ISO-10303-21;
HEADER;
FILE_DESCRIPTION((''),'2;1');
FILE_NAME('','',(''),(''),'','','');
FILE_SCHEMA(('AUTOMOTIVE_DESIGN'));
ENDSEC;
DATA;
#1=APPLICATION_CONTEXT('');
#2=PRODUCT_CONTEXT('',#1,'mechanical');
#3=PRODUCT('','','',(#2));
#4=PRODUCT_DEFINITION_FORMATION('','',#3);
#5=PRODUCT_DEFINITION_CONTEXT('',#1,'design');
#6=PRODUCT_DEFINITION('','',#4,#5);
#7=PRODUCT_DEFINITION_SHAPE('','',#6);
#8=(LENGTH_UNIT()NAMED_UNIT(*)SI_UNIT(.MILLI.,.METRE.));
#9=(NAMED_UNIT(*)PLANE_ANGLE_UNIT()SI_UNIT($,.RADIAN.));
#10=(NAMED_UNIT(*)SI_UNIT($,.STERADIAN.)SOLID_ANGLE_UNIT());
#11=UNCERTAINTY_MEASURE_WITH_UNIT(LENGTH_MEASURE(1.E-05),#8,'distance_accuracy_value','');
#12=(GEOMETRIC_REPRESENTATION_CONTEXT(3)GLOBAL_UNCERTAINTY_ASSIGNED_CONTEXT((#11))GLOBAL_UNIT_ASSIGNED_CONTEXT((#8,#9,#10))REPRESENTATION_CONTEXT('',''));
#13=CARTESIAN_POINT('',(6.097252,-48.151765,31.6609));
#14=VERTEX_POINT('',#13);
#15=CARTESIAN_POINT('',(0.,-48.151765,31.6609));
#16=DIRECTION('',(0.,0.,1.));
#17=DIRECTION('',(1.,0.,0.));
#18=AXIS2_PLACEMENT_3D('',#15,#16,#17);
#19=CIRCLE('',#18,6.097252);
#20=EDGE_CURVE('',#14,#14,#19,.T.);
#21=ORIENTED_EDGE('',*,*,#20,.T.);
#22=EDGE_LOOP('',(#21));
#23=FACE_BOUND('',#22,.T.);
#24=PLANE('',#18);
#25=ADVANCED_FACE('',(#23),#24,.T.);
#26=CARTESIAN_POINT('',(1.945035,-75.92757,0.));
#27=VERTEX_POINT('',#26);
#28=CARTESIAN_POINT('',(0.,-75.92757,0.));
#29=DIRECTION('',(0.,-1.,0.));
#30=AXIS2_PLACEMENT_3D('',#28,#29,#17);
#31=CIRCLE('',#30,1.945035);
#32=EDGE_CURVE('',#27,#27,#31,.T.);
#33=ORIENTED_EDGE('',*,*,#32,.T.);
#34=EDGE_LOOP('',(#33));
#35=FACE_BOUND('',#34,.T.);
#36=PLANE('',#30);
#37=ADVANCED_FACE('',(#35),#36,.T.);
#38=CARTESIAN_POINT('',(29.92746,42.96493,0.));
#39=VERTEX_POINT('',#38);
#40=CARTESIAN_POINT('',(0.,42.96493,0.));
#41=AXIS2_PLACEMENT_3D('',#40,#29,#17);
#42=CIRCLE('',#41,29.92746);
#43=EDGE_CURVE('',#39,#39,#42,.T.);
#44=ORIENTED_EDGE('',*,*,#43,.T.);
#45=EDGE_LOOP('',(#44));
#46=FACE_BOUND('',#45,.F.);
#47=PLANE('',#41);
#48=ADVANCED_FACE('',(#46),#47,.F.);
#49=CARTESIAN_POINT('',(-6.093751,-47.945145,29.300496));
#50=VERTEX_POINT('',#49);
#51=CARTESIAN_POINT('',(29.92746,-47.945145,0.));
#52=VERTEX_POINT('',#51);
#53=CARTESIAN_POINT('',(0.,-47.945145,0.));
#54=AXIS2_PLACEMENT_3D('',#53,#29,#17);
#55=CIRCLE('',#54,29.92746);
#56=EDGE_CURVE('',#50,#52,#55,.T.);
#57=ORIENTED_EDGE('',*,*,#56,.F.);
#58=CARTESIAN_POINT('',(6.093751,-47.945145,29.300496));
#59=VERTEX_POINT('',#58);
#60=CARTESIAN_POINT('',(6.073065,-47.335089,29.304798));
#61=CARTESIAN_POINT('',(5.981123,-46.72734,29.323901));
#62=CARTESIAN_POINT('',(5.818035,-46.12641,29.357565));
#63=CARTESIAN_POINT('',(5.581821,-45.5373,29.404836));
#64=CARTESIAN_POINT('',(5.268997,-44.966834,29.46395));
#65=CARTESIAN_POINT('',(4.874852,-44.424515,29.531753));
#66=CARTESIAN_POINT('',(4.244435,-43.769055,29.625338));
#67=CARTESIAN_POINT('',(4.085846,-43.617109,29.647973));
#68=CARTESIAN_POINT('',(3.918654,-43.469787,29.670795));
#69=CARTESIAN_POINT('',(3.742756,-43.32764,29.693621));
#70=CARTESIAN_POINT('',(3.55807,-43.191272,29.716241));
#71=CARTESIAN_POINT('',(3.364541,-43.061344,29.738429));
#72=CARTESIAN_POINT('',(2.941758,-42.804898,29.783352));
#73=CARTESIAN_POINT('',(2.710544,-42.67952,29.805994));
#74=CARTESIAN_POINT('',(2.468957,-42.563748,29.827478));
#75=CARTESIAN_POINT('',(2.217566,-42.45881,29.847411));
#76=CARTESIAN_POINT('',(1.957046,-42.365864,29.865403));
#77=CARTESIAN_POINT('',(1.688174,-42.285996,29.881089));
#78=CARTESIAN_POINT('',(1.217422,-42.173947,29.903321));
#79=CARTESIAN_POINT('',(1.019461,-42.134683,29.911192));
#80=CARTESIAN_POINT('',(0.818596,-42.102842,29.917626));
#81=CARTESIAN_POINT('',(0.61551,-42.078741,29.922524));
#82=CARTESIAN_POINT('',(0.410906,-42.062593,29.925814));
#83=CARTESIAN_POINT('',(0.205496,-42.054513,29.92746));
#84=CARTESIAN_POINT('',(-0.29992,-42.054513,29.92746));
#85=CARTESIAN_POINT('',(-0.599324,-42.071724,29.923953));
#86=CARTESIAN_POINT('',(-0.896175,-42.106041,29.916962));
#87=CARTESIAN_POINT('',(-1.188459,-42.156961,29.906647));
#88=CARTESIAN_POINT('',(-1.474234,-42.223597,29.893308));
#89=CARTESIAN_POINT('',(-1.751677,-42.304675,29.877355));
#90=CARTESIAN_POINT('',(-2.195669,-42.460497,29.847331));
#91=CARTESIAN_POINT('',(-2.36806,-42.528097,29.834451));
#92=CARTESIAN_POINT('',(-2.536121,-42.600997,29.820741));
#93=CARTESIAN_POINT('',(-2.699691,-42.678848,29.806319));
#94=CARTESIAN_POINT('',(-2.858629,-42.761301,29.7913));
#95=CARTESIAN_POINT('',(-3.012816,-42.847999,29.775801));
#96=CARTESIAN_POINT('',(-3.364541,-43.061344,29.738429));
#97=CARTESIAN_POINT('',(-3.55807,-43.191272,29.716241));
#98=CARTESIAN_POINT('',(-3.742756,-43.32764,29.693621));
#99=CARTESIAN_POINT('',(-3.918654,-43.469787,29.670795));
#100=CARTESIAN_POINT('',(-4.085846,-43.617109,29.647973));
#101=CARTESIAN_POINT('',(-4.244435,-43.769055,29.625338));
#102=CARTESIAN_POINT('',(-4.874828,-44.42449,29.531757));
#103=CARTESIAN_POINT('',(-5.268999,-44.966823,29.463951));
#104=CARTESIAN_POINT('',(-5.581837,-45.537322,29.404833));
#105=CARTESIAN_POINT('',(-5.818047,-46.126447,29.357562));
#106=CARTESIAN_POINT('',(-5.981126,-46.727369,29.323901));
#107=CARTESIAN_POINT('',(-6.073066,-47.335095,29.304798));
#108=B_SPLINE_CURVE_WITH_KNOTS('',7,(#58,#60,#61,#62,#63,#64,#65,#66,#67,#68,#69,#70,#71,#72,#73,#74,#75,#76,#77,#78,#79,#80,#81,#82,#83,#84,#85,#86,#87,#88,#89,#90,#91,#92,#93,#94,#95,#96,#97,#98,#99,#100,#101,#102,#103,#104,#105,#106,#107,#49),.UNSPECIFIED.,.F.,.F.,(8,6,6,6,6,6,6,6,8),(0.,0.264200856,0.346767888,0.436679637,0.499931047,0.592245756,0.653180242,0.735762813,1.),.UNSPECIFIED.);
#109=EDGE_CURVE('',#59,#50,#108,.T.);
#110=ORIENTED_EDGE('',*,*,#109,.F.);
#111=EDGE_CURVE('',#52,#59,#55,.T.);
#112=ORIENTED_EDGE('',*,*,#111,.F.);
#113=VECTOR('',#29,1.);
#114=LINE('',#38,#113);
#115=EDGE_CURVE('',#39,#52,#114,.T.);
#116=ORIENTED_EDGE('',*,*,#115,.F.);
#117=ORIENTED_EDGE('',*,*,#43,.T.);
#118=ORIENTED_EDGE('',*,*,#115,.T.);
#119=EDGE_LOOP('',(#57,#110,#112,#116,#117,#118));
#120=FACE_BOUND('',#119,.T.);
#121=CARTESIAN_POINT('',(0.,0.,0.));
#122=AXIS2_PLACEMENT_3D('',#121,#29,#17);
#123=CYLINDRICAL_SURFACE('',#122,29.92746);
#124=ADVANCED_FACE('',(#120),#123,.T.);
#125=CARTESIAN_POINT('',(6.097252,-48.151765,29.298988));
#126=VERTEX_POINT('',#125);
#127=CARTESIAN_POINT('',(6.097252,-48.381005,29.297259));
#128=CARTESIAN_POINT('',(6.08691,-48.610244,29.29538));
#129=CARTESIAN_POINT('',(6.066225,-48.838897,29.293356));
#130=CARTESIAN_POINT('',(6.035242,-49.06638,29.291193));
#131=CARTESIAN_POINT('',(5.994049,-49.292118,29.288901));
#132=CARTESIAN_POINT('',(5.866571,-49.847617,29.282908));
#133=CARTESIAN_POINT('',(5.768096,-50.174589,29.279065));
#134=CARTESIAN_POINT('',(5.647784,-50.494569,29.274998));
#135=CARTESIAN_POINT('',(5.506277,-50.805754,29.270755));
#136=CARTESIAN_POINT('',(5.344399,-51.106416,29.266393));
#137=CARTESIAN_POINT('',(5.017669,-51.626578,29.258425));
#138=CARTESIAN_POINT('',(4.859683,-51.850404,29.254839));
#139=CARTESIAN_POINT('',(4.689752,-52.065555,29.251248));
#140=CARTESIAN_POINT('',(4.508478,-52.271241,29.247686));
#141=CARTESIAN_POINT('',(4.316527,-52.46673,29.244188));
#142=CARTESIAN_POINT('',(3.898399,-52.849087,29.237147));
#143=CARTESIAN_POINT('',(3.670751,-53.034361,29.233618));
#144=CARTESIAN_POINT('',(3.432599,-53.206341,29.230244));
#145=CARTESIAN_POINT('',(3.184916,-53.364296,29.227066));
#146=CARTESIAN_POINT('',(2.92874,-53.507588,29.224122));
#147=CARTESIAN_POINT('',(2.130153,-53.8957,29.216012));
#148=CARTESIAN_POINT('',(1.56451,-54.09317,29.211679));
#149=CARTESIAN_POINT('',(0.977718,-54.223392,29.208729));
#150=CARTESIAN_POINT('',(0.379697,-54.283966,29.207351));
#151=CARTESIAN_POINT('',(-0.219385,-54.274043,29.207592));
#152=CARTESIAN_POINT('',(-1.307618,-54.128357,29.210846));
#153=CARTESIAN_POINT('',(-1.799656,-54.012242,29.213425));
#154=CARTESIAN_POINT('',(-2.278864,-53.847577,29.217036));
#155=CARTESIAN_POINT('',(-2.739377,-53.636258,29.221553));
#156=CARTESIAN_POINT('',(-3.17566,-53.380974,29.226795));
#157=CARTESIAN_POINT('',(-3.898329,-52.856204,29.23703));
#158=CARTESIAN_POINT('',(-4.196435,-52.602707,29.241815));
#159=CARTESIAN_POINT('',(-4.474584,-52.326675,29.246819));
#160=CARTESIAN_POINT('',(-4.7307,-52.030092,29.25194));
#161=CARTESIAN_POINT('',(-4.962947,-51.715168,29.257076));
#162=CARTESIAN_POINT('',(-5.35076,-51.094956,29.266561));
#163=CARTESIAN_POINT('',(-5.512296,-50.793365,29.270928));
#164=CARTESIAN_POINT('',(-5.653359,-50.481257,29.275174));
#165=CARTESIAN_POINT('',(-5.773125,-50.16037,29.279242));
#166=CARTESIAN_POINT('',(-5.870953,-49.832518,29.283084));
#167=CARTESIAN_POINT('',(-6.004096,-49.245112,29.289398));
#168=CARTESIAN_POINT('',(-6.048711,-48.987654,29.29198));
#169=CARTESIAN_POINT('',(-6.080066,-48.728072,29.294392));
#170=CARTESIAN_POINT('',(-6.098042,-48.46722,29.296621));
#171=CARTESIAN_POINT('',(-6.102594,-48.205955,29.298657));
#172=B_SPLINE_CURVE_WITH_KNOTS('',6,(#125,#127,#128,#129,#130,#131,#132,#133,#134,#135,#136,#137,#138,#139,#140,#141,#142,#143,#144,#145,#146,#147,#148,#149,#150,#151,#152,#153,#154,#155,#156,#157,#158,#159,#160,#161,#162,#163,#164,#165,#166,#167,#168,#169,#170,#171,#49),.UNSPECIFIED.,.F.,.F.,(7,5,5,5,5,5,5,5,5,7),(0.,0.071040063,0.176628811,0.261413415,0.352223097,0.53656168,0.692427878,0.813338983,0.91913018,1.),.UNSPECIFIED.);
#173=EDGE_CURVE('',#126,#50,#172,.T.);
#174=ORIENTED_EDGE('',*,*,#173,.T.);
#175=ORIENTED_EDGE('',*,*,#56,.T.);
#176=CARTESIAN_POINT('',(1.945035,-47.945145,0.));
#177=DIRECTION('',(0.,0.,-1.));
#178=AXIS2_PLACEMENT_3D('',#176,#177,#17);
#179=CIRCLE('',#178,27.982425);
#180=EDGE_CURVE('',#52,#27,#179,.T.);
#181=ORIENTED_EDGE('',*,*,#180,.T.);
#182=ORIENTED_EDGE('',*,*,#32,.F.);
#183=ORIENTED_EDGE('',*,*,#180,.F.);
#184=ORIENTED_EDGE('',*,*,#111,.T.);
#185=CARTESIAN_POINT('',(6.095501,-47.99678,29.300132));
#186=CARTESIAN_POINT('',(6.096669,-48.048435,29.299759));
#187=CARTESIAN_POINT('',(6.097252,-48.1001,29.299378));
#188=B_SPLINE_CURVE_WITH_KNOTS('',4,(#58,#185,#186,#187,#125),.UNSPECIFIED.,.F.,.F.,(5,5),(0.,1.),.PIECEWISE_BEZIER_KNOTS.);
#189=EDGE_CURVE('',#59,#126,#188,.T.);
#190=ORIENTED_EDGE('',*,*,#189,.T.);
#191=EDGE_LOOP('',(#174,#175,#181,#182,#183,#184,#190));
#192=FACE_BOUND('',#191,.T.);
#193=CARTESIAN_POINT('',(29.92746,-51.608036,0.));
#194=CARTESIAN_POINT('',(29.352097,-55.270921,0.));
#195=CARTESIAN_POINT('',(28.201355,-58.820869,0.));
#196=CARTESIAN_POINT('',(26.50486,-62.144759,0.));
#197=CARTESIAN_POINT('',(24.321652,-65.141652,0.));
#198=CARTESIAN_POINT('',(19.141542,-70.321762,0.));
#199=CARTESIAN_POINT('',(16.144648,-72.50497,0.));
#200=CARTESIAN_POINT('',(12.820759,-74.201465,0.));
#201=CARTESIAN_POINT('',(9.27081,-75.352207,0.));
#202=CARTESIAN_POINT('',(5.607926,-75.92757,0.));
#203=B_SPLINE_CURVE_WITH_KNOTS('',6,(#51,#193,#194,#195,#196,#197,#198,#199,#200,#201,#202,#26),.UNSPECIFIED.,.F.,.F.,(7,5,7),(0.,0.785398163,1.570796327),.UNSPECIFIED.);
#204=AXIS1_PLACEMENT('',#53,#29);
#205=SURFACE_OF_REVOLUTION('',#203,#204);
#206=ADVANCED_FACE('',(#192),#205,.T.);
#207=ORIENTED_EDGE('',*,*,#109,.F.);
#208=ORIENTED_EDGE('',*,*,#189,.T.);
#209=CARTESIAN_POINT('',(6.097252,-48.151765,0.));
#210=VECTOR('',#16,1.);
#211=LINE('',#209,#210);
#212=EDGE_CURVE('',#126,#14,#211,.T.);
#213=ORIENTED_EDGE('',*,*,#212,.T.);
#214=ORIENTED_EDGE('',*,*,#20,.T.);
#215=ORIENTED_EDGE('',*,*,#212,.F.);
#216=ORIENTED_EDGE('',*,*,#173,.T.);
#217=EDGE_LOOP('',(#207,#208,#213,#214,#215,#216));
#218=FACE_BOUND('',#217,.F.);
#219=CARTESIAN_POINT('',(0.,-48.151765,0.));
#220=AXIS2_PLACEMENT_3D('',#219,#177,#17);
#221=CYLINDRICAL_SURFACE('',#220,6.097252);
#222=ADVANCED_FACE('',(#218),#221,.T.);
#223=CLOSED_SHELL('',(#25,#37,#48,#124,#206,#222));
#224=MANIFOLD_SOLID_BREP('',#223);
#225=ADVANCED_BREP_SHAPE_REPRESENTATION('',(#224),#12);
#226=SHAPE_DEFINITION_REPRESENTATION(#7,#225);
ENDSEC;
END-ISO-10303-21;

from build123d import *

# Parameters (mm, degrees)
F0_R     = 29.9274598154
F1_DEPTH = 75.92757
F2_R     = 27.9824251374
F3_DEPTH = 42.964930072
F4_R     = 6.0972524399
F5_DEPTH = 31.6609
F6_DEPTH = 6.63492


# Not quite as in the source:
# - a feature names something its author has since deleted; it is built from what else it names


with BuildPart() as f1:
    # F0 (on Front) → F1 (new body)
    with BuildSketch(Plane.XZ):
        Circle(F0_R)
    extrude(amount=F1_DEPTH)

    # F2
    f2_edges = [f1.edges().sort_by_distance(p)[0] for p in [
        (-29.92746, -75.92757, 0),
    ]]
    fillet(f2_edges, radius=F2_R)

    # F3 (add): a face of the model
    f3_faces = [f1.faces().sort_by_distance(p)[0] for p in [
        (0, 0, 0),
    ]]
    extrude(f3_faces, amount=F3_DEPTH)

    # F4 (on Top) → F5 (join)
    with BuildSketch(Plane.XY):
        with Locations((0, -48.1517650187)):
            Circle(F4_R)
    extrude(amount=F5_DEPTH)

    # F6 (add): a face of the model
    f6_faces = [f1.faces().sort_by_distance(p)[0] for p in [
        (0, -48.1517650187, 31.6609),
    ]]
    extrude(f6_faces, amount=-F6_DEPTH)


solid = f1.part
